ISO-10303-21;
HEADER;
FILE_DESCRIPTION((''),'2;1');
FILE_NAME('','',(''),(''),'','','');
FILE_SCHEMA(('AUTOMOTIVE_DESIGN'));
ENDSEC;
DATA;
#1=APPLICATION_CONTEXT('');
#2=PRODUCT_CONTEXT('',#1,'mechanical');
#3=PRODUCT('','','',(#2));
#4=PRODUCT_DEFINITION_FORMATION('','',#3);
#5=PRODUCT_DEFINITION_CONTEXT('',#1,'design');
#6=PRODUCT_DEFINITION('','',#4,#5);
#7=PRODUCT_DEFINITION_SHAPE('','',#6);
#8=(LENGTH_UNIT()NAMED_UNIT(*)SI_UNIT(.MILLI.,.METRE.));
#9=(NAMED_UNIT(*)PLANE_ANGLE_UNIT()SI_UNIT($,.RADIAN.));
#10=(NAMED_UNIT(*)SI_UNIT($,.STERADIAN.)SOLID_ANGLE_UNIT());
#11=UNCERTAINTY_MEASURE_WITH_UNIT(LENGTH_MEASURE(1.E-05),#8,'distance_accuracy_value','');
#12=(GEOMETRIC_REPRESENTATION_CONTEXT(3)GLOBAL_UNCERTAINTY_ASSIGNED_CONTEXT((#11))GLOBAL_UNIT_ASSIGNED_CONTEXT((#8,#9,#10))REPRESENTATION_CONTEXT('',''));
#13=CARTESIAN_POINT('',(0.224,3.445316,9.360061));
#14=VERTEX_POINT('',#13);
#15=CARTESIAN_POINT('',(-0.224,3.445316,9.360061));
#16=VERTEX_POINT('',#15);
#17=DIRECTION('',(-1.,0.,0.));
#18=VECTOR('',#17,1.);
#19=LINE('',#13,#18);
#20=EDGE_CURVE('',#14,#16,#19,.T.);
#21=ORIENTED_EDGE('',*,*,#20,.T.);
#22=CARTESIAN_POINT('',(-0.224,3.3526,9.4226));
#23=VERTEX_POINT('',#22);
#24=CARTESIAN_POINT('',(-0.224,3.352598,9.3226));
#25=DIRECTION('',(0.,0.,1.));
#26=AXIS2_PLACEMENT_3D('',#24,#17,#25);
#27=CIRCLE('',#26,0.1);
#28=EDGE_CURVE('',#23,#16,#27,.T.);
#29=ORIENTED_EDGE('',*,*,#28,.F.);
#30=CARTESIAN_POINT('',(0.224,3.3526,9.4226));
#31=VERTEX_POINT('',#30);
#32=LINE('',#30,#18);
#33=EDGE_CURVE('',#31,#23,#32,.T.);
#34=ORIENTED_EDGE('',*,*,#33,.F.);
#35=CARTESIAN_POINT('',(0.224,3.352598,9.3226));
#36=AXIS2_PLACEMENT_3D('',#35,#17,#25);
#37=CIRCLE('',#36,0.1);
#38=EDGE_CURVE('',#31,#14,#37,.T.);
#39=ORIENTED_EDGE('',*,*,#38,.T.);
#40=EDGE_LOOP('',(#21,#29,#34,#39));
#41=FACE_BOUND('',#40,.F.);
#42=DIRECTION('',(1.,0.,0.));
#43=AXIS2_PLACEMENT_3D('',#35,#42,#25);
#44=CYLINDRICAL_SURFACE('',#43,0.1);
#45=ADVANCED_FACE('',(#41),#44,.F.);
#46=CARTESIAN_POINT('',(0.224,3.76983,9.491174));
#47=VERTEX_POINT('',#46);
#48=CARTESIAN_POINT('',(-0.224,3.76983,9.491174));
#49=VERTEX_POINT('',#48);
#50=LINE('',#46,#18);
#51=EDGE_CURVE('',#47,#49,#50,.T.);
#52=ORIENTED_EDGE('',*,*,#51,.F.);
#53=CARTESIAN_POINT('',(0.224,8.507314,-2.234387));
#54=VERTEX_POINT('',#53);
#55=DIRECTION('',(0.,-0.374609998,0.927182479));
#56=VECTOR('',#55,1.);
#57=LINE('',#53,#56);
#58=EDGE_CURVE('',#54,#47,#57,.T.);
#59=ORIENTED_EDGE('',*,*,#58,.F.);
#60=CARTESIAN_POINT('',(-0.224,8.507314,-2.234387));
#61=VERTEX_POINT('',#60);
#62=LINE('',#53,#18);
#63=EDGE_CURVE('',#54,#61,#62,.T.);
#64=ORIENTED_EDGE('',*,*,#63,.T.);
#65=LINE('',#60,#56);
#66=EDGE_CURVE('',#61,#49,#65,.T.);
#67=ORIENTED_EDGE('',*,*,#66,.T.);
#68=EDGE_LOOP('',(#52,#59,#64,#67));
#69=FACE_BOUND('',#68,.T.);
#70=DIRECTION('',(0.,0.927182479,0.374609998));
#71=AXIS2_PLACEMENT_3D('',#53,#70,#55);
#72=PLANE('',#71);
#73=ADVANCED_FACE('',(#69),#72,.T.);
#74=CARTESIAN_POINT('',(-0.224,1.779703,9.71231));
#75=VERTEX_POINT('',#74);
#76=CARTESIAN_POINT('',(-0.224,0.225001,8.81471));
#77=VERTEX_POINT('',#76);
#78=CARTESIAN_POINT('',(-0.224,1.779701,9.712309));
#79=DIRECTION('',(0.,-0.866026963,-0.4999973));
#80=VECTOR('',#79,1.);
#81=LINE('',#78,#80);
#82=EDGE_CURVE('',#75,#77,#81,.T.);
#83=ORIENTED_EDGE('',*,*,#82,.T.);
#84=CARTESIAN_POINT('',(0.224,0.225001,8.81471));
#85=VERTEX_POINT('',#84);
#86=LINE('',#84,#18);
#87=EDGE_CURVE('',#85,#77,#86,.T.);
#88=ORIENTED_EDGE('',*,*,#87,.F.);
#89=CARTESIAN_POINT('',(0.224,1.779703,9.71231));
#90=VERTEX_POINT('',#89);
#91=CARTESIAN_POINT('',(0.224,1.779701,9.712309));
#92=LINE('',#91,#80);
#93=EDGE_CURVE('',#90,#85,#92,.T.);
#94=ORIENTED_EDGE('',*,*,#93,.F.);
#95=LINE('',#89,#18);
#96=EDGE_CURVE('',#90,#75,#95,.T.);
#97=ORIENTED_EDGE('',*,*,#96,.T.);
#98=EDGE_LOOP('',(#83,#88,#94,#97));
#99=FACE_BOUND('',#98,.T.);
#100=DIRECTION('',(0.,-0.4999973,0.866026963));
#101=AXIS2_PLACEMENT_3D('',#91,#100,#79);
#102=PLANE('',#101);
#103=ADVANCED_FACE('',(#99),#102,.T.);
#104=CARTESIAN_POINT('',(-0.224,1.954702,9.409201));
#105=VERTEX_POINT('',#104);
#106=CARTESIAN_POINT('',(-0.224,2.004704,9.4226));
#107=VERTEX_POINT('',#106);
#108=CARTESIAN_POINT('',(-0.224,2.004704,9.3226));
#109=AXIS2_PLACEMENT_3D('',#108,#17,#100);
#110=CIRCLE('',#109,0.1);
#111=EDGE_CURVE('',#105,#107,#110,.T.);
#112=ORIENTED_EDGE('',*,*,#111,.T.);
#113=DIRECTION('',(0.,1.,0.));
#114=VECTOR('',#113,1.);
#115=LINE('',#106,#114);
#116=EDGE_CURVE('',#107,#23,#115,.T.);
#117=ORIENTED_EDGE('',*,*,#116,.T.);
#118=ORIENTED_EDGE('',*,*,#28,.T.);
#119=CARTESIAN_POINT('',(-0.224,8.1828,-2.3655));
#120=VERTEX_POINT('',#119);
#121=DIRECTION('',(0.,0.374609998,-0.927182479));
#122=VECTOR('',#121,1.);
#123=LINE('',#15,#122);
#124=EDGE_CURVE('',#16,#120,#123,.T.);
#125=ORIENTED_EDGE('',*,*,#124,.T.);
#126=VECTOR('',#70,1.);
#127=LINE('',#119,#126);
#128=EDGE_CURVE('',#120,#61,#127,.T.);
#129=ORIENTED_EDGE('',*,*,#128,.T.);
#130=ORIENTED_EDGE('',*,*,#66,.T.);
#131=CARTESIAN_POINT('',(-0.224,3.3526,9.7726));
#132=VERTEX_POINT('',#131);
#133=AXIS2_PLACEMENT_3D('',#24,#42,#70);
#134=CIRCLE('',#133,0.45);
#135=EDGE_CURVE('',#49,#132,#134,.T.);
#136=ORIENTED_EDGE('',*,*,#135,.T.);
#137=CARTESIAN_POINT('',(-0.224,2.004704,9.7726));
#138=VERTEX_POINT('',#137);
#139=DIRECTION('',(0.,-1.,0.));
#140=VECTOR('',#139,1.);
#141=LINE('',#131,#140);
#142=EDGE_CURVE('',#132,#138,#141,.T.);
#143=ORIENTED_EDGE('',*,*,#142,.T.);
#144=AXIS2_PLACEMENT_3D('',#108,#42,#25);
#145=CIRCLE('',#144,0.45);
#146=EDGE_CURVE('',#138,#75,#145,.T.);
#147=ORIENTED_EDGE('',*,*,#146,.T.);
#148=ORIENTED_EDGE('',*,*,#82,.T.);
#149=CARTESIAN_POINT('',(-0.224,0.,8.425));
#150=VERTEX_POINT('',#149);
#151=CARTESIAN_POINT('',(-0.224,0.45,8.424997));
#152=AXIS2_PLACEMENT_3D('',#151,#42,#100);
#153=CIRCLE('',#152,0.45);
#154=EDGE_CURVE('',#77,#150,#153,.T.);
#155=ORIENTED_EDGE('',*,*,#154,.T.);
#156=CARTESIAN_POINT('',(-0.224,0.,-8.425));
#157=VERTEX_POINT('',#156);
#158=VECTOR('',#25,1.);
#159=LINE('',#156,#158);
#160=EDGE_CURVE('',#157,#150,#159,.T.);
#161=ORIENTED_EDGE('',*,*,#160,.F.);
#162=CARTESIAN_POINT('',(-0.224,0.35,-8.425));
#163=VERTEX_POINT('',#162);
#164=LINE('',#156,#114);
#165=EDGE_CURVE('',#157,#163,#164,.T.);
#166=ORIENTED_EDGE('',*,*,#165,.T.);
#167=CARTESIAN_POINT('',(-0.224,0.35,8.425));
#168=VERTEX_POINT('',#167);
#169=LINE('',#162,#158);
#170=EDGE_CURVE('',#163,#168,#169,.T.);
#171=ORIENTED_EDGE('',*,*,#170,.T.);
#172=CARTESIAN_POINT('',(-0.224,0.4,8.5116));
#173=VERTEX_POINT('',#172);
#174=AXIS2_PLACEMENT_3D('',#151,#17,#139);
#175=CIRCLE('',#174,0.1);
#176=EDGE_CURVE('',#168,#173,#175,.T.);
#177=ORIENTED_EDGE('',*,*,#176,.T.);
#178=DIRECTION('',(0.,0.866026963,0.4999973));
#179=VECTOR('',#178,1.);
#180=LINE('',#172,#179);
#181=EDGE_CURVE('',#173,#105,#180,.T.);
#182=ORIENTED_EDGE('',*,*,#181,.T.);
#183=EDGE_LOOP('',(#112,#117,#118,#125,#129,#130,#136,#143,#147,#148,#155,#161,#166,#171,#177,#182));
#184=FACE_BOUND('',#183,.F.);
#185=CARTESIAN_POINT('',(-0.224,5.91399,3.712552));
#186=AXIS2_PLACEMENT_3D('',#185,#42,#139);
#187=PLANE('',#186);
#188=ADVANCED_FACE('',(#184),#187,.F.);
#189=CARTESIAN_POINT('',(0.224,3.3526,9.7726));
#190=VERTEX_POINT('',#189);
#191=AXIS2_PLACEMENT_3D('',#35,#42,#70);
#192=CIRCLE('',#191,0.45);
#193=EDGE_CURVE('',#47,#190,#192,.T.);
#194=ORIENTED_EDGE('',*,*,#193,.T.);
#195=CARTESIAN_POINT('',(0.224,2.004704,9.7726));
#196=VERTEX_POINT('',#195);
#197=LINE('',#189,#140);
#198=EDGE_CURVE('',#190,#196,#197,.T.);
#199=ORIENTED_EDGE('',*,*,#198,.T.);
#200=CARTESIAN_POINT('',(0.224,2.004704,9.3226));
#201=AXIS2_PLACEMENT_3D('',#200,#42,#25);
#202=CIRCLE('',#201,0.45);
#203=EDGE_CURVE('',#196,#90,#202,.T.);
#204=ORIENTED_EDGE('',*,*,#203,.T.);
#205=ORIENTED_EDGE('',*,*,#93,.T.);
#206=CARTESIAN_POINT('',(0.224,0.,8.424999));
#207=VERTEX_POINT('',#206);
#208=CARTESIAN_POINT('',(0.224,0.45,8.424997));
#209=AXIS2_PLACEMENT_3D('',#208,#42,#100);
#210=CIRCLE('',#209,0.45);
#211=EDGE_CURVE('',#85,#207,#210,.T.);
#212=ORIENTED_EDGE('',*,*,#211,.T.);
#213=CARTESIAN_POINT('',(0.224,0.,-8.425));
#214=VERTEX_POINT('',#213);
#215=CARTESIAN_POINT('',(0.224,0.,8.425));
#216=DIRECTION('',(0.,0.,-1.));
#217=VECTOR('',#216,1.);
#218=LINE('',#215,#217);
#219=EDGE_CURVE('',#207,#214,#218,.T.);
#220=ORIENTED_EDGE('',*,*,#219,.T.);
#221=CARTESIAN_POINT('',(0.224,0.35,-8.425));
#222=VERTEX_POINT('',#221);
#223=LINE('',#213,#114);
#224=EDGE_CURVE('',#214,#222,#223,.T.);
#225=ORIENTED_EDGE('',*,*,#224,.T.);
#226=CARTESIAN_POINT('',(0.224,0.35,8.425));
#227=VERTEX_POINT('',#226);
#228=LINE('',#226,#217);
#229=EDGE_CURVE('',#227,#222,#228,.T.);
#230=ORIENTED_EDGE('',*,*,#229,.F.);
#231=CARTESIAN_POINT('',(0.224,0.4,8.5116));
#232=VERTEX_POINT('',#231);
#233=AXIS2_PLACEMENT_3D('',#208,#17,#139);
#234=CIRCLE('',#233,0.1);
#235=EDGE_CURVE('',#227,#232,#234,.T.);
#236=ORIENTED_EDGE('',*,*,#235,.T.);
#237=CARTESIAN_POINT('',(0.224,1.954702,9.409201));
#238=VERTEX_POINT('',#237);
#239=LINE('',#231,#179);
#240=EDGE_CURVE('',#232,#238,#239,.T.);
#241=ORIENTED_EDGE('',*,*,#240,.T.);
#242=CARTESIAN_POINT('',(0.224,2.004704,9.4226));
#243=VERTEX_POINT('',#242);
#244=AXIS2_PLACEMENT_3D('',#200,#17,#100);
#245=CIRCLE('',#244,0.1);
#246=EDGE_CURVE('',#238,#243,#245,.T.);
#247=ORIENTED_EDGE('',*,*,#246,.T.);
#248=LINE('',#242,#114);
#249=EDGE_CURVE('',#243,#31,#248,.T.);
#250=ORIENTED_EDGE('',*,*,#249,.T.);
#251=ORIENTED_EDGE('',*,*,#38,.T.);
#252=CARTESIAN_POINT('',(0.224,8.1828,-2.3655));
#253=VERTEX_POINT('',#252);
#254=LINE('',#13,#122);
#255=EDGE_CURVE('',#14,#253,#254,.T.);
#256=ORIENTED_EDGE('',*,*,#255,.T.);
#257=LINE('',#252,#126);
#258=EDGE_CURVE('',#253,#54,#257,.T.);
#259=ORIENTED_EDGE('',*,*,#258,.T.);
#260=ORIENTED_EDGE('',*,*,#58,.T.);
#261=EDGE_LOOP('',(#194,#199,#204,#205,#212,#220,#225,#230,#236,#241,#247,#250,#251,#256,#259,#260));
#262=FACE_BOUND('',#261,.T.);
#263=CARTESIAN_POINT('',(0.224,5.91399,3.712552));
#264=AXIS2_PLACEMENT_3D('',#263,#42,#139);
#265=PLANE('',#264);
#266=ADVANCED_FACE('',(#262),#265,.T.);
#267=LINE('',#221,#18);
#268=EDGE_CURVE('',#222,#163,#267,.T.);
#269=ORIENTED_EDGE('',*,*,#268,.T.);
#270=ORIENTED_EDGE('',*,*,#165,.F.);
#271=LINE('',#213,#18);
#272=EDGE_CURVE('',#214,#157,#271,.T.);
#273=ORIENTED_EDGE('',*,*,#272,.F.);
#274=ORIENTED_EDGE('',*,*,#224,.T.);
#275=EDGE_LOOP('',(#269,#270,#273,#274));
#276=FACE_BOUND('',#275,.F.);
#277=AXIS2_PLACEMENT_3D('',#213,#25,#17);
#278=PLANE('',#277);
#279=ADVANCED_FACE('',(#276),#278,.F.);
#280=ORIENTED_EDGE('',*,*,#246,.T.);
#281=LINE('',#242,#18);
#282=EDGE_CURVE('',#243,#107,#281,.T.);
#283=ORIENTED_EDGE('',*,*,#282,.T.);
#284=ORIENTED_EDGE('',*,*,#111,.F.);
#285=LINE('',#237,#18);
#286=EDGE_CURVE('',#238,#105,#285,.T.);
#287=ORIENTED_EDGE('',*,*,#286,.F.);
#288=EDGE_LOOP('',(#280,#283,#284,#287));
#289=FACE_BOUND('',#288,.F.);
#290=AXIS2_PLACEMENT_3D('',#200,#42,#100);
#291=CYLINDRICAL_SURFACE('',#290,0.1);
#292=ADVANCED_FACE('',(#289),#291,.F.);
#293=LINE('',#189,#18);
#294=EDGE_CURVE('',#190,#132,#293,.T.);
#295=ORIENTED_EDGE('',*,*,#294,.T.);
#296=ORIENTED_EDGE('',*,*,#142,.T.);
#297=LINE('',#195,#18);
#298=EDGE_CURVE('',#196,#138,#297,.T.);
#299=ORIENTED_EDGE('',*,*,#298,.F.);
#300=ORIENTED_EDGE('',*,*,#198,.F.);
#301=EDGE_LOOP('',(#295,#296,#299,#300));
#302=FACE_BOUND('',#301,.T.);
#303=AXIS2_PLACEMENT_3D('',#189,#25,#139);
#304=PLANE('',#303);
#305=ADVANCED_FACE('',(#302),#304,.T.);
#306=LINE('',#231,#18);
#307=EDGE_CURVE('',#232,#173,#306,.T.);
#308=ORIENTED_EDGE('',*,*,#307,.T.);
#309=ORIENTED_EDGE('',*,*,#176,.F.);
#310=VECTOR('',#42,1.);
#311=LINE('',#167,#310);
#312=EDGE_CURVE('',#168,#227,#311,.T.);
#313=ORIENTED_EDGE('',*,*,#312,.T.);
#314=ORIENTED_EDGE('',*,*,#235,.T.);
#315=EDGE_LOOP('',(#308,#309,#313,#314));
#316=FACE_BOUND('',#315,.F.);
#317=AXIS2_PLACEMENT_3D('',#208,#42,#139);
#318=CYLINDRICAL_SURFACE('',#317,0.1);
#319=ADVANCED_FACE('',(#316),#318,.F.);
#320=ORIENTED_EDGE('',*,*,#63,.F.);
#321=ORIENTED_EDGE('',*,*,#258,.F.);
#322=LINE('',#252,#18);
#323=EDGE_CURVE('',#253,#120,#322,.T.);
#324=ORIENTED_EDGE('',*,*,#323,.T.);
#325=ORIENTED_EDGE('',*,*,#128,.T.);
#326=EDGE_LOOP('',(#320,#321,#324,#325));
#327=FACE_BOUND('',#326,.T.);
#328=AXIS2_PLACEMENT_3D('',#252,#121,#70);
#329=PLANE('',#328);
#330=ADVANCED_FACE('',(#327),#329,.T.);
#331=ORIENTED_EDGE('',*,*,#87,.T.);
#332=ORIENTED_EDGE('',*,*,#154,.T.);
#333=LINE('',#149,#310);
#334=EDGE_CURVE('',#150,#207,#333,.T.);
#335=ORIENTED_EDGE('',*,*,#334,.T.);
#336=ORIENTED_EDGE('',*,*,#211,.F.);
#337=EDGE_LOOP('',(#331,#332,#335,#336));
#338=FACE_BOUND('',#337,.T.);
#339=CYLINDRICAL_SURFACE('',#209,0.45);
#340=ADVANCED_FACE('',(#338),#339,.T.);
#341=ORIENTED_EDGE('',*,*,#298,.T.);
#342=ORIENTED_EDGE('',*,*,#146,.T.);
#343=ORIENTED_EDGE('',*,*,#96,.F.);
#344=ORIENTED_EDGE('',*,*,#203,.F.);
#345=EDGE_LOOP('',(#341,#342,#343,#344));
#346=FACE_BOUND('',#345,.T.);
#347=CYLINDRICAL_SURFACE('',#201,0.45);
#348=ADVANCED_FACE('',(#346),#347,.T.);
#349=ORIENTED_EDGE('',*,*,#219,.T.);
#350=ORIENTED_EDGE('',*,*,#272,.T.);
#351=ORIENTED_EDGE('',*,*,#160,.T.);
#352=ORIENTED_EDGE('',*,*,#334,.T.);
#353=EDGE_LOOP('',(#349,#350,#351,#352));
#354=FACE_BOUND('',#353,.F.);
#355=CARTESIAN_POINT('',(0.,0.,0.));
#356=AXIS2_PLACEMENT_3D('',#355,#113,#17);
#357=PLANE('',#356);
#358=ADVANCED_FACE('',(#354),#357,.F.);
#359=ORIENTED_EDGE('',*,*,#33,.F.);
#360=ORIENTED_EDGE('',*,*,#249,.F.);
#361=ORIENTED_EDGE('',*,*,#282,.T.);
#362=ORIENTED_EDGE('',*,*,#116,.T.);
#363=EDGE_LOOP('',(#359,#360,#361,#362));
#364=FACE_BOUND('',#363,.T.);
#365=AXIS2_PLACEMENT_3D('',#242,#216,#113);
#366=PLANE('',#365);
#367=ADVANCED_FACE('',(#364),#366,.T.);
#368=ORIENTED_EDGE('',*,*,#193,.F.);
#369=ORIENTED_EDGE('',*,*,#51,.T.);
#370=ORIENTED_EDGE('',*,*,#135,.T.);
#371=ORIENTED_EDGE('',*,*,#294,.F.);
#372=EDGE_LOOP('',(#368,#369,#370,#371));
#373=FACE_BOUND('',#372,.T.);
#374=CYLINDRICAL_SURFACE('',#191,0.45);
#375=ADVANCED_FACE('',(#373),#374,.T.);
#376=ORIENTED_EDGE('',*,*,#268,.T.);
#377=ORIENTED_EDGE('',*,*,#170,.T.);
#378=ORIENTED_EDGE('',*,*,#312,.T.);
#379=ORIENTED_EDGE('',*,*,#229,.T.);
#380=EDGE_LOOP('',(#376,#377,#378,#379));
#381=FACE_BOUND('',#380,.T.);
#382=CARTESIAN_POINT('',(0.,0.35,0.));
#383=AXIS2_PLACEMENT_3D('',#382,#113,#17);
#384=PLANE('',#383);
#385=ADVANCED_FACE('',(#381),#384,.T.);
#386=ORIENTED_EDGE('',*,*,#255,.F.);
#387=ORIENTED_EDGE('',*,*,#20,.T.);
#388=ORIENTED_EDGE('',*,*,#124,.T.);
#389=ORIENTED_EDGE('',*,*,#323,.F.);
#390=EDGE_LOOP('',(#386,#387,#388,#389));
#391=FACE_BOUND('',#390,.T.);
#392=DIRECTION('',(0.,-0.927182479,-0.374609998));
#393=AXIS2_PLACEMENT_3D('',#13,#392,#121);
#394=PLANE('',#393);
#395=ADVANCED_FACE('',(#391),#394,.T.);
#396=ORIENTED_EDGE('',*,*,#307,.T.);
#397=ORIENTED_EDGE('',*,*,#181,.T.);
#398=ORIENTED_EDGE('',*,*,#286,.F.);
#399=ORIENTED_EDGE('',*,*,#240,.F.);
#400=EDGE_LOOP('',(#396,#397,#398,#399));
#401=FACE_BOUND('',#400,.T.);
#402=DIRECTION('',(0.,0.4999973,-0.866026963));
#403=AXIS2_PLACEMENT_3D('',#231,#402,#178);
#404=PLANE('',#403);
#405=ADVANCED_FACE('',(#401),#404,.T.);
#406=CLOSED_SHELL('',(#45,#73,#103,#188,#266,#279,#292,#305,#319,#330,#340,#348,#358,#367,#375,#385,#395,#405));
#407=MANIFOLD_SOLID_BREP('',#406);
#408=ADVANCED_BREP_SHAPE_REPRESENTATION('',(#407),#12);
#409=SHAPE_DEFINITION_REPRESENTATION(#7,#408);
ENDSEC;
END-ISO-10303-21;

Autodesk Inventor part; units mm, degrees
ref_plane "YZ Plane" through (0, 0, 0) normal (1, 0, 0) x (0, 1, 0)
ref_plane "XZ Plane" through (0, 0, 0) normal (0, 1, 0) x (-1, 0, 0)
ref_plane "XY Plane" through (0, 0, 0) normal (0, 0, 1) x (1, 0, 0)
sketch "Sketch1" plane through (0, 0, 0) normal (0, 1, 0) x (-1, 0, 0)
  line L0 (0.224, 8.425) -> (-0.224, 8.425)
  line L1 (-0.224, 8.425) -> (-0.224, -8.425)
  line L2 (-0.224, -8.425) -> (0.224, -8.425)
  line L3 (0.224, -8.425) -> (0.224, 8.425)
  line L4 (0.224, 8.425) -> (-0.224, -8.425) construction
  line L5 (-0.224, 8.425) -> (0.224, -8.425) construction
  point P0 (0, 0)
  dimension "d0" = 0.448
  dimension "d1" = 16.85
extrude "Plate1" add sketch "Sketch1" along normal blind 0.35
sketch "Sketch2" plane through (0.224, 0.4, 8.5116) normal (0, -0.5, 0.8660254) x (1, 0, 0)
  line L0 (-0.448, 0) -> (0, 0)
  line L1 (0, 0) -> (0, 1.7952)
  line L2 (0, 1.7952) -> (-0.448, 1.7952)
  line L3 (-0.448, 1.7952) -> (-0.448, 0)
edge flange "Flange1" height 2.055 angle 60 thickness 0.35 bend radius 0.1 thickness toward (0, -0.5, 0.8660254) relief tear relief width 0.35 relief depth 0.175 edges at (0, 0.35, 8.425) wall of the first edge with corners at (-0.224, 0.4, 8.5116) (0.224, 0.4, 8.5116) (0.224, 1.9547, 9.4092) (-0.224, 1.9547, 9.4092)
bend "Bend1"
corner "Corner1"
sketch "Sketch3" plane through (0.224, 2.0047, 9.4226) normal (0, 0, 1) x (1, 0, 0)
  line L0 (-0.448, 0) -> (0, 0)
  line L1 (0, 0) -> (0, 1.3479)
  line L2 (0, 1.3479) -> (-0.448, 1.3479)
  line L3 (-0.448, 1.3479) -> (-0.448, 0)
edge flange "Flange2" height 1.4685 angle 30 thickness 0.35 bend radius 0.1 thickness toward (0, 0, 1) relief tear relief width 0.35 relief depth 0.175 edges at (0, 1.9547, 9.4092) wall of the first edge with corners at (-0.224, 2.0047, 9.4226) (0.224, 2.0047, 9.4226) (0.224, 3.3526, 9.4226) (-0.224, 3.3526, 9.4226)
bend "Bend2"
corner "Corner2"
sketch "Sketch4" plane through (0.224, 3.4453, 9.3601) normal (0, 0.9271839, 0.3746066) x (-1, 0, 0)
  line L0 (0.448, 0) -> (0, 0)
  line L1 (0, 0) -> (0, -12.6465)
  line L2 (0, -12.6465) -> (0.448, -12.6465)
  line L3 (0.448, -12.6465) -> (0.448, 0)
edge flange "Flange3" height 12.95 angle 68 thickness 0.35 bend radius 0.1 thickness toward (0, 0.9271839, 0.3746066) relief tear relief width 0.35 relief depth 0.175 edges at (0, 3.3526, 9.4226) wall of the first edge with corners at (-0.224, 3.4453, 9.3601) (0.224, 3.4453, 9.3601) (0.224, 8.1828, -2.3655) (-0.224, 8.1828, -2.3655)
bend "Bend3"
corner "Corner3"
equation "\"d2\" = Thickness"
equation "\"d3\" = BendReliefWidth"
equation "\"d4\" = BendReliefDepth"
equation "\"d5\" = MinimumRemnant"
equation "\"d6\" = TransitionRadius"
equation "\"d9\" = BendRadius"
equation "\"d10\" = CornerReliefSize"
equation "\"d11\" = GapSize"
equation "\"d12\" = JacobiRadiusSize"
equation "\"d13\" = BendReliefWidth"
equation "\"d14\" = BendReliefDepth"
equation "\"d15\" = MinimumRemnant"
equation "\"d16\" = TransitionRadius"
equation "\"d19\" = BendRadius"
equation "\"d20\" = CornerReliefSize"
equation "\"d21\" = GapSize"
equation "\"d22\" = JacobiRadiusSize"
equation "\"d23\" = BendReliefWidth"
equation "\"d24\" = BendReliefDepth"
equation "\"d25\" = MinimumRemnant"
equation "\"d26\" = TransitionRadius"
equation "\"d29\" = BendRadius"
equation "\"d30\" = CornerReliefSize"
equation "\"d31\" = GapSize"
equation "\"d32\" = JacobiRadiusSize"
equation "\"BendReliefWidth\" = Thickness"
equation "\"BendReliefDepth\" = 0.5 * Thickness"
equation "\"CornerReliefSize\" = 4 * Thickness"
equation "\"MinimumRemnant\" = 2 * Thickness"
equation "\"TransitionRadius\" = BendRadius"
equation "\"JacobiRadiusSize\" = BendRadius"
equation "\"GapSize\" = Thickness"
equation "\"Thickness\" = 0.35"
equation "\"BendRadius\" = 0.1"
properties part number "RJ45 Even Pins" material "Nickel-Copper Alloy 400"
